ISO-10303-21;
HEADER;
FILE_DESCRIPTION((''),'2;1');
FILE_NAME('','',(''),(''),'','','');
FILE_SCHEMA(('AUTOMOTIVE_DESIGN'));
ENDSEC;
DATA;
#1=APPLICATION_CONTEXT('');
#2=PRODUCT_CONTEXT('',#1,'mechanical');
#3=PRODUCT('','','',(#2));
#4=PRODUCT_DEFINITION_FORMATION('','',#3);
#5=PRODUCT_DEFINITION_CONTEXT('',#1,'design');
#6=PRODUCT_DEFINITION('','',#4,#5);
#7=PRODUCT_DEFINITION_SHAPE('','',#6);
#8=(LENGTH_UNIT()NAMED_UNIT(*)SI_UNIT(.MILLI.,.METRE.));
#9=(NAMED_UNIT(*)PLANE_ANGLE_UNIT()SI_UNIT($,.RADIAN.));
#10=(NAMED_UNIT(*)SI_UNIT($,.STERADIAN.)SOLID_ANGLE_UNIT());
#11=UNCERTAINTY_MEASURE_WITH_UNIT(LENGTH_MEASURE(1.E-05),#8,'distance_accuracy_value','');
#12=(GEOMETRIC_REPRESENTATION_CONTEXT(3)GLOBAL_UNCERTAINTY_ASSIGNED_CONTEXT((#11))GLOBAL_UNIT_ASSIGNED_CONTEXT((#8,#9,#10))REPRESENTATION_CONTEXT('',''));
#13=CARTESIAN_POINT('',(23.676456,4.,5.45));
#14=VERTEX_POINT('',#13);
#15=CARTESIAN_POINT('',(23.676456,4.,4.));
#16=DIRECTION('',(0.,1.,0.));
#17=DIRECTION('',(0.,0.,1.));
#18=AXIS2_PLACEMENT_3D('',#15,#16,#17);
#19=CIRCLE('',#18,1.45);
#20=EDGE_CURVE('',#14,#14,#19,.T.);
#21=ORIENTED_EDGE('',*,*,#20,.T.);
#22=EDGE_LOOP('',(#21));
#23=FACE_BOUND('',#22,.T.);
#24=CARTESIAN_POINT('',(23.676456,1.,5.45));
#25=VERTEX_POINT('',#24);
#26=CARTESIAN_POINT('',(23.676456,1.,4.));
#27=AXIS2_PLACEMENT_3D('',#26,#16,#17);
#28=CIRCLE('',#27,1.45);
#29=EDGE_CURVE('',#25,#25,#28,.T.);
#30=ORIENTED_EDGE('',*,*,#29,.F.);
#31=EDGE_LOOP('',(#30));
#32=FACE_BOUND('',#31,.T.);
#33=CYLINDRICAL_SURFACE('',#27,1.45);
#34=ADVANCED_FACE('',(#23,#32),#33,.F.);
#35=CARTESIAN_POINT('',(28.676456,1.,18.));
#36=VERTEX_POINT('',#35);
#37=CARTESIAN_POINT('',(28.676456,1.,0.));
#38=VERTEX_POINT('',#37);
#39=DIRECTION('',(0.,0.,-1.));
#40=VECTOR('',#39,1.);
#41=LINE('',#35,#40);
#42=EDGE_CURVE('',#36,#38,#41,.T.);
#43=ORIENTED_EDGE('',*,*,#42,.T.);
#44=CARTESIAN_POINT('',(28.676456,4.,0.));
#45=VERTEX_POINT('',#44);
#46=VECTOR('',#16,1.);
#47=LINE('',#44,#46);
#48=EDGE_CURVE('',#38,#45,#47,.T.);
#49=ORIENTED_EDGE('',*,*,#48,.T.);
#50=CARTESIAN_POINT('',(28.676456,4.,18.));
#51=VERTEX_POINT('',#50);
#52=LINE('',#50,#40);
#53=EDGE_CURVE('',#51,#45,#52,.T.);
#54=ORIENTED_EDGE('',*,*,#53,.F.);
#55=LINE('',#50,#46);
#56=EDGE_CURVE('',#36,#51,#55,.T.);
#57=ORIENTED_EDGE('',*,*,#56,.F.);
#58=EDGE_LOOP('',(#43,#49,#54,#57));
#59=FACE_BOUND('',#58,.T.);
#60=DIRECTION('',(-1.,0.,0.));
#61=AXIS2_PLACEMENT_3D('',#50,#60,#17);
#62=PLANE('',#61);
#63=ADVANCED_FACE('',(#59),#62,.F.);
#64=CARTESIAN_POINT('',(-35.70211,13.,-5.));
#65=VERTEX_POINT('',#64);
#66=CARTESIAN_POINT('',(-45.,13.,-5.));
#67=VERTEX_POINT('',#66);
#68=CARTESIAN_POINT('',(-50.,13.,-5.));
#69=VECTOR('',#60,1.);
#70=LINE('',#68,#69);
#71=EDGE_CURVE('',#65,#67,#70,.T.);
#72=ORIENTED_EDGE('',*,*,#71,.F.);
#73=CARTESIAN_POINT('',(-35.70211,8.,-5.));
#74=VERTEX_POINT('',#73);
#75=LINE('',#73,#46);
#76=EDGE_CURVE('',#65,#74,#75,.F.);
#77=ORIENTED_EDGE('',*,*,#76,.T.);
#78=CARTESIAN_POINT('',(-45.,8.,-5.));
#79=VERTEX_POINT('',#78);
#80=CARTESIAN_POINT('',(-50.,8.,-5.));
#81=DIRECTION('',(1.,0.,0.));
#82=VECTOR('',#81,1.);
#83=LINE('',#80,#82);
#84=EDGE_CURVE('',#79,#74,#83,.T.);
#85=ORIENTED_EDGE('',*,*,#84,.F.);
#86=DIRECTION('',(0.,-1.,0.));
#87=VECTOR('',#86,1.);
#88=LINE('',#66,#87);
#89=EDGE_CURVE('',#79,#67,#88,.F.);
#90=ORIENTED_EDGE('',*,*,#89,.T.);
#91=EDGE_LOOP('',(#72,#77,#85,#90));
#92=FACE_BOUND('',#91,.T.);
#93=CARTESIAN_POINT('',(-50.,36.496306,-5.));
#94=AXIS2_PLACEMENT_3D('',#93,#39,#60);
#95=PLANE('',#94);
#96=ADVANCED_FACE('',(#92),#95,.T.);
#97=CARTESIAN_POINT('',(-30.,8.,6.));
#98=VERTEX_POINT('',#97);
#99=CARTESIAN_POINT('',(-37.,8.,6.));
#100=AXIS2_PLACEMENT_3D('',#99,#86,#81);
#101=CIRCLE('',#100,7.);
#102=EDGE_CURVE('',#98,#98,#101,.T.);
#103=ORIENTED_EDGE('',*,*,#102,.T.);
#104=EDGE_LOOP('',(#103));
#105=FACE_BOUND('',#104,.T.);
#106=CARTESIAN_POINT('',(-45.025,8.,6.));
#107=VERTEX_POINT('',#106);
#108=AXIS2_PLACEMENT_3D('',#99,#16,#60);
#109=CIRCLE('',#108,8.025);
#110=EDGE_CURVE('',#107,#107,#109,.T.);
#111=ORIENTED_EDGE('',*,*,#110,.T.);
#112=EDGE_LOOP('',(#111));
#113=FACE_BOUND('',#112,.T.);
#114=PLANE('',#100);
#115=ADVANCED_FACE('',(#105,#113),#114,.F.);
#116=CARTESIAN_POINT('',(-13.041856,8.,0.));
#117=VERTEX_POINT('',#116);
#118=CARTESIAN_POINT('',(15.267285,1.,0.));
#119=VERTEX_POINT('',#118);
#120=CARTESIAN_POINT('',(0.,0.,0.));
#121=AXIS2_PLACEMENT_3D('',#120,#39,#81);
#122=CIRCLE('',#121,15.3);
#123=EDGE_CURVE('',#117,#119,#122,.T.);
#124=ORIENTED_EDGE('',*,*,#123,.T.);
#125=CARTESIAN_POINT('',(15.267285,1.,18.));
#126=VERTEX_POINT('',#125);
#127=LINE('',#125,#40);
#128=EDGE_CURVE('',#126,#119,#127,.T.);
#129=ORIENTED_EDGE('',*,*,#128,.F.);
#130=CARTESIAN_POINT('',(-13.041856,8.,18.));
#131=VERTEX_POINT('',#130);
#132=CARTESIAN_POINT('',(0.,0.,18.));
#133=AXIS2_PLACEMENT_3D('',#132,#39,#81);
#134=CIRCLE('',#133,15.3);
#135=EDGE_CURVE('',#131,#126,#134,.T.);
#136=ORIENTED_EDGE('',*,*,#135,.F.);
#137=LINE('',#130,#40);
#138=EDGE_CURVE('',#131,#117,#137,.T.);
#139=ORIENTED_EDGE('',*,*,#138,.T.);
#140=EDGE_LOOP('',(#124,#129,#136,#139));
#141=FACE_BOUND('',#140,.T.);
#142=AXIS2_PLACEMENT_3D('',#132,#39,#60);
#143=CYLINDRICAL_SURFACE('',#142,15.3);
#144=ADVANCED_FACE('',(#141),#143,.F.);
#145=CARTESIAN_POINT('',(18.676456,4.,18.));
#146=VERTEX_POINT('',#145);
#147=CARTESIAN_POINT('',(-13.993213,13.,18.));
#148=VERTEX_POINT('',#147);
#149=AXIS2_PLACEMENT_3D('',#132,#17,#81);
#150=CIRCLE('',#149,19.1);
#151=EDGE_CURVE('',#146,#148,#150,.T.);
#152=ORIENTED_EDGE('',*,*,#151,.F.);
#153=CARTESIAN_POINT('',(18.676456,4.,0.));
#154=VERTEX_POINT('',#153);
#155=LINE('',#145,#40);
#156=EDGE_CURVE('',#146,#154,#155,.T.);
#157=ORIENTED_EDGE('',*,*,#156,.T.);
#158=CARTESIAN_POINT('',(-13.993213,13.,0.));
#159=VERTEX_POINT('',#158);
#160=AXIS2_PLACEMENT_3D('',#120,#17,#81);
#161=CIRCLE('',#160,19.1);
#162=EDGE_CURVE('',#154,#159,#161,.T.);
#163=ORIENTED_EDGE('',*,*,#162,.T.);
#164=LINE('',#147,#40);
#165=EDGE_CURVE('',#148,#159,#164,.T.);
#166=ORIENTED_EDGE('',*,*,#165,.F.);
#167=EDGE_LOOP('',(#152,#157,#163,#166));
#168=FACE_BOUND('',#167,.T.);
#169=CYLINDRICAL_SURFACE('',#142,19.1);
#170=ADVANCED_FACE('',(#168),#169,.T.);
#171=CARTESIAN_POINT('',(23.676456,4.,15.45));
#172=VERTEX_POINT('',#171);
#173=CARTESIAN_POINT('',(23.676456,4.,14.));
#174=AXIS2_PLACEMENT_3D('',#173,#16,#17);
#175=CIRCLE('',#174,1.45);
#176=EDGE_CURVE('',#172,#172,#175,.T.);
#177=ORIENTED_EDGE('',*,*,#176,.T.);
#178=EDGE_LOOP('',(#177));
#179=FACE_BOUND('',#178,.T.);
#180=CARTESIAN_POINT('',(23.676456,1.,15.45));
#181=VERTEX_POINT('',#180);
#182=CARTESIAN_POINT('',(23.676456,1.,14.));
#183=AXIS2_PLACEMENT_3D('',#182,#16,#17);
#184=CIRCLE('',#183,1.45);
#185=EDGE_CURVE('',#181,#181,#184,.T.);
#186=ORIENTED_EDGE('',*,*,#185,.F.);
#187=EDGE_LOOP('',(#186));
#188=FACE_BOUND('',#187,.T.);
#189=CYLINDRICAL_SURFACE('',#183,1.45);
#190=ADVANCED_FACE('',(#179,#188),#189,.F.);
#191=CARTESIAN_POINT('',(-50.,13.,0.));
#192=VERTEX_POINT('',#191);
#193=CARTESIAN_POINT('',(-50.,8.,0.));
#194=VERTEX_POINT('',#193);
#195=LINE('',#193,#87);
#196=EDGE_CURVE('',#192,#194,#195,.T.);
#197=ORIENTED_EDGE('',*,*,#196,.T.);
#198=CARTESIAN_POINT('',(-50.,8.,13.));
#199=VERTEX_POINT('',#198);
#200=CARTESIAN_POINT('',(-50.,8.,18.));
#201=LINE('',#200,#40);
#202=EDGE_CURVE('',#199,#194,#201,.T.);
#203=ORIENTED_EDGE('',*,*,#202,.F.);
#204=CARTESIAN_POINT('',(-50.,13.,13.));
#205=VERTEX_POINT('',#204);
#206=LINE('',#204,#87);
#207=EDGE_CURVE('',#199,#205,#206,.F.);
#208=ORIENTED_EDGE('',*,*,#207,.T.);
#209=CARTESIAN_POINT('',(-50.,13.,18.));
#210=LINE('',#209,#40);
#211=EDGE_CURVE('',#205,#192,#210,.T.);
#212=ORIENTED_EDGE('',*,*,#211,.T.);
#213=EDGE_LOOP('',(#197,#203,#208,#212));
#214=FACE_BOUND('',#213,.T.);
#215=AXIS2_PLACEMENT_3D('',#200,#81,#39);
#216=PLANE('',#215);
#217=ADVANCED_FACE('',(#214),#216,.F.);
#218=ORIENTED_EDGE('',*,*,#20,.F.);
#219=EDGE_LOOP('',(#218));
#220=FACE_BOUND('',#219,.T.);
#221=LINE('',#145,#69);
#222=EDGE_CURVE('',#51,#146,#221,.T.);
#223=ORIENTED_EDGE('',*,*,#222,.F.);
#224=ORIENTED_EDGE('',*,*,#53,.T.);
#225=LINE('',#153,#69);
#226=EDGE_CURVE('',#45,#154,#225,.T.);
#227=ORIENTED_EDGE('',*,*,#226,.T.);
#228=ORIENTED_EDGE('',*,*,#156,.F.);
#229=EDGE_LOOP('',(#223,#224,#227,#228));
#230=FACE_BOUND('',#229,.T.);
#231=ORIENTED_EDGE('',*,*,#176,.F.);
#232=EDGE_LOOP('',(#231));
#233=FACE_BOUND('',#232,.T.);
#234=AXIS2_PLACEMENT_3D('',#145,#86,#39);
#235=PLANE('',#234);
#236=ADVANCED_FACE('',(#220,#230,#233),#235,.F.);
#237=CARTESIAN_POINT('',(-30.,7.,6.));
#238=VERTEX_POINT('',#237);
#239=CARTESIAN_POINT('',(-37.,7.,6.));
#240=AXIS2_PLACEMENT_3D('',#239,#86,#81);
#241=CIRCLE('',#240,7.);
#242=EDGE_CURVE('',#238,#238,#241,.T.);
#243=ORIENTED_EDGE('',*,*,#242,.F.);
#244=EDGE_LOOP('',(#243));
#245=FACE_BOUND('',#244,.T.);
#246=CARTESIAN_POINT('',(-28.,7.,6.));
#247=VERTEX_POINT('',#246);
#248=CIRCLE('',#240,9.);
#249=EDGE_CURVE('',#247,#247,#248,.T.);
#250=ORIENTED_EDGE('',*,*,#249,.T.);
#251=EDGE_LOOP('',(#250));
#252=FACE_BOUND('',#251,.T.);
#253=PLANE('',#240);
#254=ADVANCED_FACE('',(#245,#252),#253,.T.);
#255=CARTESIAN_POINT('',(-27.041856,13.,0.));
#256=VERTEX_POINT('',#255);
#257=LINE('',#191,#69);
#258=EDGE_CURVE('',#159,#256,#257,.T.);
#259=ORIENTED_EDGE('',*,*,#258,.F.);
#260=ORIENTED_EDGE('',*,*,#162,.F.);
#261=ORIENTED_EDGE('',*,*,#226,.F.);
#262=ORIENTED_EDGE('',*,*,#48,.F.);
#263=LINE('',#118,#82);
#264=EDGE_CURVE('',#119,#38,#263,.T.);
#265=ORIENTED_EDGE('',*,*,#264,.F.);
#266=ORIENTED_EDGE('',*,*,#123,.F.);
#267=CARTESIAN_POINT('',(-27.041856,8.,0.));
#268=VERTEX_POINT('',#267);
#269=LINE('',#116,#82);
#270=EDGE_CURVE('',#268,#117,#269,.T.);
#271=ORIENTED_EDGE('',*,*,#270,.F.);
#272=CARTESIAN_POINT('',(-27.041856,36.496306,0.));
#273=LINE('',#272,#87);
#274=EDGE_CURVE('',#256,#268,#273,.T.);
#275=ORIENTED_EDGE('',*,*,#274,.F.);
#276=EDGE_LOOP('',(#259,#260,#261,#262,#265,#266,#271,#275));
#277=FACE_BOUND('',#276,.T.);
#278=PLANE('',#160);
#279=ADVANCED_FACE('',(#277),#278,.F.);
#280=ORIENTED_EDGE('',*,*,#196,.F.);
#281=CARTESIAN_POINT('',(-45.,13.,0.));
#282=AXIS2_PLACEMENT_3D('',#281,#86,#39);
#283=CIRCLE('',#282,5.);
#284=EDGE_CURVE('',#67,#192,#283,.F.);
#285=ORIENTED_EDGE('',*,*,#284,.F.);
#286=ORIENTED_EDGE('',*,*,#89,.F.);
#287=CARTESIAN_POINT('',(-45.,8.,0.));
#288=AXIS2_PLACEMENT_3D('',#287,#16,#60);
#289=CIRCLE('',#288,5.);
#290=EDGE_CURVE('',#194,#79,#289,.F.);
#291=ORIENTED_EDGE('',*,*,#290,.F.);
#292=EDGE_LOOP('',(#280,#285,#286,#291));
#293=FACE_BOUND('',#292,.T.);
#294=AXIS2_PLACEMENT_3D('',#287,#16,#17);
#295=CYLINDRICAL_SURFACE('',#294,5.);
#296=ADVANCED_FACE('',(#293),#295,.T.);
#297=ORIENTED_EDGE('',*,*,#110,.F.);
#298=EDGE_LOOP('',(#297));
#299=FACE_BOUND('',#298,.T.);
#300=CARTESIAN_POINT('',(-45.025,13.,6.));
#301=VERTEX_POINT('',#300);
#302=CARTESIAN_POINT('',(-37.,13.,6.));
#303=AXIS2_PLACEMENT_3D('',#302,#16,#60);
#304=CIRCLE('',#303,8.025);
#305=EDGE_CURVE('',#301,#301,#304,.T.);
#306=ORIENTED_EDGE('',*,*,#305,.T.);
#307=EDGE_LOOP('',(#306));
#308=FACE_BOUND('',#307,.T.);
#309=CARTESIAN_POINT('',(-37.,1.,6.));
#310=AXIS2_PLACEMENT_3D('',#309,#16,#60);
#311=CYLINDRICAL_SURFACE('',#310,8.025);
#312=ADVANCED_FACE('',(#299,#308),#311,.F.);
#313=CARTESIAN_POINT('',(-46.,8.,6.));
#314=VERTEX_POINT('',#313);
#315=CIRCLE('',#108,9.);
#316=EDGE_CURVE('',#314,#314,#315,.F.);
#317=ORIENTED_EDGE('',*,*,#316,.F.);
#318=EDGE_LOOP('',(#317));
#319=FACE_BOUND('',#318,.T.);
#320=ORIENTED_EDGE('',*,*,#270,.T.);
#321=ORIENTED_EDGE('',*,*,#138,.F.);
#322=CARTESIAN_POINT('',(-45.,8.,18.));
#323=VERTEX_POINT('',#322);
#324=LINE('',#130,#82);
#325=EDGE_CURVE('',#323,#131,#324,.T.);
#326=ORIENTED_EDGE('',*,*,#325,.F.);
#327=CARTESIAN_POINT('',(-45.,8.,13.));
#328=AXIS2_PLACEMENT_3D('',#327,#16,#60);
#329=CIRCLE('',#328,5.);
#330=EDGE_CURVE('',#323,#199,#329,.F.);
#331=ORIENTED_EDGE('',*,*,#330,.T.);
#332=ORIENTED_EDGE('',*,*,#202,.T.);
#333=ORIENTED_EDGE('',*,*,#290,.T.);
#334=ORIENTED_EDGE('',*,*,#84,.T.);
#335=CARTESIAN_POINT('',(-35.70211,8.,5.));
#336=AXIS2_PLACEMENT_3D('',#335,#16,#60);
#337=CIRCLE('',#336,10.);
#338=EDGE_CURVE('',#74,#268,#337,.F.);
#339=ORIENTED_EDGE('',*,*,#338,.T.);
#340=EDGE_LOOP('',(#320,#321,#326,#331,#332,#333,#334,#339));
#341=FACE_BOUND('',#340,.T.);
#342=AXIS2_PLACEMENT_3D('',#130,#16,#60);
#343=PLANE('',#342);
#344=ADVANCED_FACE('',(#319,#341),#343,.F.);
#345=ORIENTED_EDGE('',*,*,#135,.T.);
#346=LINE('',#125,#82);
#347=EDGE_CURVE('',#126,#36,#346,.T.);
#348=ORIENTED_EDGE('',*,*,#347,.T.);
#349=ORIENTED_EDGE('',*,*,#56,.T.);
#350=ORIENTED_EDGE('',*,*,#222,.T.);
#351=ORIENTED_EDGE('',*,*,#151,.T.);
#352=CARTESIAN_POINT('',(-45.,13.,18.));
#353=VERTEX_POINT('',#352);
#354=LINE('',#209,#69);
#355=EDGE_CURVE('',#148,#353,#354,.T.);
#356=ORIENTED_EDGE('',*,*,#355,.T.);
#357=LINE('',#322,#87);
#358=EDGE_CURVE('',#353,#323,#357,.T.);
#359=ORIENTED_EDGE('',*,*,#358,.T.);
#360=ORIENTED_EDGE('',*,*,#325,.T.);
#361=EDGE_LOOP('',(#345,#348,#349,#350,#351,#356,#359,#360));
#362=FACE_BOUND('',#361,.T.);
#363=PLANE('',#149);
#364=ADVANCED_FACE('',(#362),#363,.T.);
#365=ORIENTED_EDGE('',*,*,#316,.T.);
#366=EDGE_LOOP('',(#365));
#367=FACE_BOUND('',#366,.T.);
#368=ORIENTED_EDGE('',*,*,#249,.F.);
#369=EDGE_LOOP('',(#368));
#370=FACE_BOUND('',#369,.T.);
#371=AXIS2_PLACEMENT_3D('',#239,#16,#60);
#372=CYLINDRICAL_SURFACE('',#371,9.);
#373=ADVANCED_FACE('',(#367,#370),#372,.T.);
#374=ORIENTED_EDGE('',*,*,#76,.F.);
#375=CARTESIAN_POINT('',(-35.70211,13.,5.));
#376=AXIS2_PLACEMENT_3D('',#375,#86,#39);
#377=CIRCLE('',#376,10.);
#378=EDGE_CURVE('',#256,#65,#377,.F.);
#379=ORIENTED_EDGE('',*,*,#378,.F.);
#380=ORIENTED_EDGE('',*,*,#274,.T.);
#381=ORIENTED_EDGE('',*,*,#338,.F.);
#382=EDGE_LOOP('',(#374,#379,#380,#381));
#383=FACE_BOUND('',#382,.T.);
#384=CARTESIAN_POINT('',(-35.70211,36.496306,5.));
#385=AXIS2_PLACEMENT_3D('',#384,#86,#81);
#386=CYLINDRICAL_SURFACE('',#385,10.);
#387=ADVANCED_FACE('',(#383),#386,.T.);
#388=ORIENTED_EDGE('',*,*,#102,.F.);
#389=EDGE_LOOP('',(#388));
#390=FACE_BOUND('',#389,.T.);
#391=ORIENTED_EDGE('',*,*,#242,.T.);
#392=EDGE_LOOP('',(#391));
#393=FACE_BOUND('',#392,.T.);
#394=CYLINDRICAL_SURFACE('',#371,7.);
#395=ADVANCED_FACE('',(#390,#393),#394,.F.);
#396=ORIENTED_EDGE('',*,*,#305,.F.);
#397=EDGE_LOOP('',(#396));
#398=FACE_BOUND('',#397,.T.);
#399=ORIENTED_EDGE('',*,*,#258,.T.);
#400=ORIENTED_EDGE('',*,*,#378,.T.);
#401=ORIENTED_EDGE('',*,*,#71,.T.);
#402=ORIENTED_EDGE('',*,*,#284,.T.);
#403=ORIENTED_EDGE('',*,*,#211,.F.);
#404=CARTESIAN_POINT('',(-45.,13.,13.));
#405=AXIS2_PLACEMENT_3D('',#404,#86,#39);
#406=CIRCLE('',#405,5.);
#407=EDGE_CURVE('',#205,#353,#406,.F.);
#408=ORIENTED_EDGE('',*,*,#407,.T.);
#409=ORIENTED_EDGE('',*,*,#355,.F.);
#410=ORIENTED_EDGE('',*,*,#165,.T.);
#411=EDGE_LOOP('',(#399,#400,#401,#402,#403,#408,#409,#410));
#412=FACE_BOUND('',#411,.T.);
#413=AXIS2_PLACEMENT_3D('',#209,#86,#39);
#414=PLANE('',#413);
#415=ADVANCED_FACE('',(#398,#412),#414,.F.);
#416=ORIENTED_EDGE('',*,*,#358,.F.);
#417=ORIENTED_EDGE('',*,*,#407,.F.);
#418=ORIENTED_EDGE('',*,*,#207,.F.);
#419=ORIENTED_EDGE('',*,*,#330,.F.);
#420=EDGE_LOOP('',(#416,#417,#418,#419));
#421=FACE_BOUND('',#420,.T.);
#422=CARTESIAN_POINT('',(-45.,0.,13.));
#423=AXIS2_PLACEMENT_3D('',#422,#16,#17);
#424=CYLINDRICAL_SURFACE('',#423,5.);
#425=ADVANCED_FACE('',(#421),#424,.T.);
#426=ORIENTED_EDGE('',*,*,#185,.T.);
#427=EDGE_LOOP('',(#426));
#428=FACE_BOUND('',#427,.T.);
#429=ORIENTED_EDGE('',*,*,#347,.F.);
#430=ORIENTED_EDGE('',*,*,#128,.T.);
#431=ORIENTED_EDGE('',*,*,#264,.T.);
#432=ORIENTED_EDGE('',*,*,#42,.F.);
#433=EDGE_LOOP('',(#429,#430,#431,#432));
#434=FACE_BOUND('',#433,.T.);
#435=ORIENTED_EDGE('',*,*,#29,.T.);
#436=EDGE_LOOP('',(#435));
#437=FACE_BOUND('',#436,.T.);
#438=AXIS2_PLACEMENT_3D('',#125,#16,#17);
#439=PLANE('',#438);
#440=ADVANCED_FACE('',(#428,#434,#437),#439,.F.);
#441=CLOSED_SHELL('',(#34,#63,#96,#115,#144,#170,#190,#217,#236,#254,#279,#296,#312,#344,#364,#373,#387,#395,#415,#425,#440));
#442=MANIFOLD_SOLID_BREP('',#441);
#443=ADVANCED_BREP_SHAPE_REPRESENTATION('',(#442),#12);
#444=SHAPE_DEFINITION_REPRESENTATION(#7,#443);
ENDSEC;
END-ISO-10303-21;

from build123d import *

# Parameters (mm, degrees)
BOSS_EXTRUDE1_DEPTH = 18
SKETCH3_R           = 1.45
CUT_EXTRUDE1_DEPTH  = 56.244999774
SKETCH5_W           = 22.958144304
SKETCH5_H           = 5
BOSS_EXTRUDE2_DEPTH = 5
SKETCH6_R           = 8.025
CUT_EXTRUDE2_DEPTH  = 55.479353888
SKETCH7_R           = 9
SKETCH7_R_2         = 7
BOSS_EXTRUDE3_DEPTH = 1
FILLET1_R           = 5
FILLET2_R           = 10


with BuildPart() as part:
    # Sketch1 → Boss-Extrude1 (new body)
    with BuildSketch(Plane.XY):
        with BuildLine():
            Line((15.267285286, 1), (28.676455767, 1))
            Line((28.676455767, 1), (28.676455767, 4))
            Line((28.676455767, 4), (18.676455767, 4))
            ThreePointArc((18.676455767, 4), (5.072789326, 18.414038353), (-13.99321264, 13))
            Line((-13.99321264, 13), (-50, 13))
            Line((-50, 13), (-50, 8))
            Line((-50, 8), (-13.041855696, 8))
            ThreePointArc((-13.041855696, 8), (3.67261953, 14.852672008), (15.267285286, 1))
        make_face()
    extrude(amount=BOSS_EXTRUDE1_DEPTH)

    # Sketch3 → Cut-Extrude1 (cut, through all)
    with BuildSketch(Plane(origin=(0, 4, 0), x_dir=(1, 0, 0), z_dir=(0, 1, 0))):
        with Locations(Location((23.676455767, -4, 0), (0, 0, 270))):
            Circle(SKETCH3_R)
        with Locations(Location((23.676455767, -14, 0), (0, 0, 270))):
            Circle(SKETCH3_R)
    extrude(amount=-CUT_EXTRUDE1_DEPTH, mode=Mode.SUBTRACT)

    # Sketch5 → Boss-Extrude2 (add)
    with BuildSketch(Plane.XZ.offset(-8)):
        with Locations((-38.520927848, -2.5)):
            Rectangle(SKETCH5_W, SKETCH5_H)
    extrude(amount=-BOSS_EXTRUDE2_DEPTH)

    # Sketch6 → Cut-Extrude2 (cut, through all)
    with BuildSketch(Plane(origin=(0, 13, 0), x_dir=(1, 0, 0), z_dir=(0, 1, 0))):
        with Locations(Location((-37, -6, 0), (0, 0, 180))):
            Circle(SKETCH6_R)
    extrude(amount=-CUT_EXTRUDE2_DEPTH, mode=Mode.SUBTRACT)

    # Sketch7 → Boss-Extrude3 (add)
    with BuildSketch(Plane.XZ.offset(-8)):
        with Locations(Location((-37, 6, 0), (0, 0, 180))):
            Circle(SKETCH7_R)
        with Locations((-37, 6)):
            Circle(SKETCH7_R_2, mode=Mode.SUBTRACT)
    extrude(amount=BOSS_EXTRUDE3_DEPTH)

    # Fillet1
    fillet1_edges = [part.edges().sort_by_distance(p)[0] for p in [
        (-50, 10.5, 18),
        (-50, 10.5, -5),
    ]]
    fillet(fillet1_edges, radius=FILLET1_R)

    # Fillet2
    # the kernel refuses this fillet: 10 mm, written as the material it takes off along each edge
    with BuildSketch(Plane(origin=(-27.041855696, -13.650635095, -5), x_dir=(0, 0, 1), z_dir=(0, 1, 0))) as fillet2_piece_1:
        with BuildLine():
            CenterArc((10, -8.660254038), FILLET2_R, 120, 60)
            Line((0, -8.660254038), (-0.2, -8.660254038))
            Line((-0.2, -8.660254038), (-0.2, 0))
            Line((-0.2, 0), (0, 0.2))
            ThreePointArc((0, 0.2), (2.5, 0.2), (4.9, 0.173205081))
            Line((4.9, 0.173205081), (5, 0))
        make_face()
    extrude(amount=48.301270189, mode=Mode.SUBTRACT)


solid = part.part
